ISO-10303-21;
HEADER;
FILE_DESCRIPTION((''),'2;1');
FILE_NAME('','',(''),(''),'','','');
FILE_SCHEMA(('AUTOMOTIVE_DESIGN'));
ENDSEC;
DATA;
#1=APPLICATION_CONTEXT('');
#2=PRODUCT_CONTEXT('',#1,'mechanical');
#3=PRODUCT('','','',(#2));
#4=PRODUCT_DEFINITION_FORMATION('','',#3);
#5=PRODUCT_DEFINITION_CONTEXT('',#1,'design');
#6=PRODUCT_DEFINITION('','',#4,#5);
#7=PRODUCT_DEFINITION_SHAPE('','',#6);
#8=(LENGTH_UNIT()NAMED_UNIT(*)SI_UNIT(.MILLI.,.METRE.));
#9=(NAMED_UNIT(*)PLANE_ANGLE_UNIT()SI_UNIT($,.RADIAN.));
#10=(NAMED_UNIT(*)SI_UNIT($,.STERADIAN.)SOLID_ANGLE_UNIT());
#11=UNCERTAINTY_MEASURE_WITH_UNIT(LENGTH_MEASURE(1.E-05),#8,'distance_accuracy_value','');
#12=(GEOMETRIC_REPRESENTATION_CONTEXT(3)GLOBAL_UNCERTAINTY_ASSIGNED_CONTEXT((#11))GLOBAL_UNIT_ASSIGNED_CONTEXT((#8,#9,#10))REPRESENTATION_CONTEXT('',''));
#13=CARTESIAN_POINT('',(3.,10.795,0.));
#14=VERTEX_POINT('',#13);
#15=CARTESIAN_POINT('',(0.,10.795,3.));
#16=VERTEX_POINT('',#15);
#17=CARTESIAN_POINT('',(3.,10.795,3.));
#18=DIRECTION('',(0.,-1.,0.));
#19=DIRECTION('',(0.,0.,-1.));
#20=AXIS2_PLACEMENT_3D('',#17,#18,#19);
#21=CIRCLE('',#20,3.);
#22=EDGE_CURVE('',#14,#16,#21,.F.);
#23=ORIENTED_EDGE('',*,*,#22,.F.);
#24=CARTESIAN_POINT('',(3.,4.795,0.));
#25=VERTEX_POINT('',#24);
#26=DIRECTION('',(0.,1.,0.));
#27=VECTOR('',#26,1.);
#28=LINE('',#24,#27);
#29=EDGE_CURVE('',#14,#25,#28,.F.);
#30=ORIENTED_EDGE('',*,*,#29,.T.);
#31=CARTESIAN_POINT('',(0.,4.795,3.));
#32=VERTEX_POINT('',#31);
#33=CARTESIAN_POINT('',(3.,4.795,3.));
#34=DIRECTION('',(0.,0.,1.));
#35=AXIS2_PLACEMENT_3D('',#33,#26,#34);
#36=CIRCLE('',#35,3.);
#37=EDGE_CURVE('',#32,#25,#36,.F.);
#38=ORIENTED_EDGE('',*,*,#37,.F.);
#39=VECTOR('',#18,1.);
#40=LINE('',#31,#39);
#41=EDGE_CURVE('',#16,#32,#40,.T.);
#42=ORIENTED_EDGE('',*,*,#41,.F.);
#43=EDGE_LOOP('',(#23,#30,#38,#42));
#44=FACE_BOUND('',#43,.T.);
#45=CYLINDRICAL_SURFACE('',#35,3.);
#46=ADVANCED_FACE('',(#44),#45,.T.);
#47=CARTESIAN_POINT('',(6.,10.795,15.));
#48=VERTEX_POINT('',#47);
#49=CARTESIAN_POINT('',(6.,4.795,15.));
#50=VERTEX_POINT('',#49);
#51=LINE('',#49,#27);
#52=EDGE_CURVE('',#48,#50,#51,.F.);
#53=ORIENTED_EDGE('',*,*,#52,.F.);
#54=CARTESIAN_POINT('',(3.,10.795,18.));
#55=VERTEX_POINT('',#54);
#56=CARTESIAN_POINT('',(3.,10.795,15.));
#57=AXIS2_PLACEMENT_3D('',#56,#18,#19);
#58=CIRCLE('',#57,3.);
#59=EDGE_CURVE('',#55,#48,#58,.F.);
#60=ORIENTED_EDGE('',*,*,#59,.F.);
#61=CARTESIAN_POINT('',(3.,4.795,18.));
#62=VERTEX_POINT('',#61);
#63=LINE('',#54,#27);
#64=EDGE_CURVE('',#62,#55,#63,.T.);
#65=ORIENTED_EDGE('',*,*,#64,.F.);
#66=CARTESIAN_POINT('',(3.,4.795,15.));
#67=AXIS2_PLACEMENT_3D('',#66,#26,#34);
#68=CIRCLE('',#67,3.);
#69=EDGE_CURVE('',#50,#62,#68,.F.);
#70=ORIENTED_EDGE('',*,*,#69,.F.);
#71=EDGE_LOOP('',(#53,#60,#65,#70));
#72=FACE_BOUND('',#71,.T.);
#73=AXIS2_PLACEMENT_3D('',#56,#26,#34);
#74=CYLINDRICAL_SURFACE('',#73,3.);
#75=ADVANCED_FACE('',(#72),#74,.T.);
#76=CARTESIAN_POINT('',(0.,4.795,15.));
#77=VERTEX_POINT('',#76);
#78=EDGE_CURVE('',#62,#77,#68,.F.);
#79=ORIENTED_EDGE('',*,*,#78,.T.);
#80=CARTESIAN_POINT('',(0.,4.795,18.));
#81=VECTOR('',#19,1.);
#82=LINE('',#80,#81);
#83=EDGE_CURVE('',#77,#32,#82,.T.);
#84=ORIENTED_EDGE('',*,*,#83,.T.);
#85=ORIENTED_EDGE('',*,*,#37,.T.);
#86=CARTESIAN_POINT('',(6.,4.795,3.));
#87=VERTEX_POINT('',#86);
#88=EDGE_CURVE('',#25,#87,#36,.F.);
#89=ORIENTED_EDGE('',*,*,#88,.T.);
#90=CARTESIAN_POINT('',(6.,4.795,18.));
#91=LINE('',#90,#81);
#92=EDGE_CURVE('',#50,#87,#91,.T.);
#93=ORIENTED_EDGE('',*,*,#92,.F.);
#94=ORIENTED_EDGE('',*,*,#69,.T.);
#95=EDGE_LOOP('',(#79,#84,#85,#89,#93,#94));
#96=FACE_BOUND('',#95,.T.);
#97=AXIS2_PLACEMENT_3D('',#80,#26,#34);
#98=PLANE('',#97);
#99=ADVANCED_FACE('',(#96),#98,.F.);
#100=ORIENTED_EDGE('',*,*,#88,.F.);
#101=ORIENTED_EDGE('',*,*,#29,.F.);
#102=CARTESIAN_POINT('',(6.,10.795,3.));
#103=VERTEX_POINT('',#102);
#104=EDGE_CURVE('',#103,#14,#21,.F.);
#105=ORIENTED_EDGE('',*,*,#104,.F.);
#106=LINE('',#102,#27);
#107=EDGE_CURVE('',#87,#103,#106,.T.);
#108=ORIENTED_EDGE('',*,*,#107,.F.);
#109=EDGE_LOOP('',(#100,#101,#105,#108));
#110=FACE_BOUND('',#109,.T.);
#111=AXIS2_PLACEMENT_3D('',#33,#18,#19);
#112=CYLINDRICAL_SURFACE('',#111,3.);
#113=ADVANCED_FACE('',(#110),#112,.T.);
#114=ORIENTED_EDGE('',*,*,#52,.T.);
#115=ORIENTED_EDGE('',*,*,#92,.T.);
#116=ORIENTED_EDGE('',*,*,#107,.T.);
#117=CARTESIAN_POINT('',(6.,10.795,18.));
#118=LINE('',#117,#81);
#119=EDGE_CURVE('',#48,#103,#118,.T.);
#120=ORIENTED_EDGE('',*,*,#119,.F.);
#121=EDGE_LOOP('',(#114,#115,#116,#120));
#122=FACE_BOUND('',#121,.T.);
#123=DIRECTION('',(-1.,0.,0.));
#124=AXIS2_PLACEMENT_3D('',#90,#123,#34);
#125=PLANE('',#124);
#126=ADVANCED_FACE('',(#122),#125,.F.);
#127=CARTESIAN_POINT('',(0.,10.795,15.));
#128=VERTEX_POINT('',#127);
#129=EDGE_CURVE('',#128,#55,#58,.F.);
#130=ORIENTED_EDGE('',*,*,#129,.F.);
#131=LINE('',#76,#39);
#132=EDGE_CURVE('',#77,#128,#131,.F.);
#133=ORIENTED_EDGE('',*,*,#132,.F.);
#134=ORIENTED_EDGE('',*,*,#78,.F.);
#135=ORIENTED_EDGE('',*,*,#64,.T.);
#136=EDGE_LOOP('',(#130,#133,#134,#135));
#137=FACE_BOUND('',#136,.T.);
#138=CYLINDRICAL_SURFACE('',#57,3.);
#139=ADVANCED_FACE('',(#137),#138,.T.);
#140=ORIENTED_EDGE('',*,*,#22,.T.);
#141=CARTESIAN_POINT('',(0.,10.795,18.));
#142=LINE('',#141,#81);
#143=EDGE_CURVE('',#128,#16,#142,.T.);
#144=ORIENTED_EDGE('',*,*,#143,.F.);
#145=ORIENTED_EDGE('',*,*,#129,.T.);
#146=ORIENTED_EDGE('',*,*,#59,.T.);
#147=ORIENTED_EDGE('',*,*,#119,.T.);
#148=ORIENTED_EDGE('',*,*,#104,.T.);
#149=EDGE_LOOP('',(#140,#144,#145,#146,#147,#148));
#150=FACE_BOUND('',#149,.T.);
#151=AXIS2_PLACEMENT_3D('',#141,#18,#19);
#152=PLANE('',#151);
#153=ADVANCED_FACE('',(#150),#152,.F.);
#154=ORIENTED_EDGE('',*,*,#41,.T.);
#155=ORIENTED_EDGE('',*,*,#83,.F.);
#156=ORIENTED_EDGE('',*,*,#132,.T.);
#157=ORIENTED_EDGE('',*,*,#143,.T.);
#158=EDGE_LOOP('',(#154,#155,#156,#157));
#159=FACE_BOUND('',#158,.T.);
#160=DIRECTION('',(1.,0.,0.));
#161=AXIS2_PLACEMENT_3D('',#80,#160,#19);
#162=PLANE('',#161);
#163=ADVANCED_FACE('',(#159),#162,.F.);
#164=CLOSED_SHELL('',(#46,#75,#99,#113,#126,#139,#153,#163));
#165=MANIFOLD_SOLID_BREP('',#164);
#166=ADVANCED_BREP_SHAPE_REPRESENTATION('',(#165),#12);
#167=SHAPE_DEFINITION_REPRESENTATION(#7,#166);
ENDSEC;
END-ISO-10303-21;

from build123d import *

# Parameters (mm, degrees)
SKETCH1_W      = 6
SKETCH1_H      = 6
EXTRUDE1_DEPTH = 18
FILLET1_R      = 3


with BuildPart() as part:
    # Sketch1 → Extrude1 (new body)
    with BuildSketch(Plane.XY):
        with Locations((3, 7.795)):
            Rectangle(SKETCH1_W, SKETCH1_H)
    extrude(amount=EXTRUDE1_DEPTH)

    # Fillet1
    fillet1_edges = [part.edges().sort_by_distance(p)[0] for p in [
        (0, 7.795, 0),
        (6, 7.795, 0),
        (0, 7.795, 18),
        (6, 7.795, 18),
    ]]
    fillet(fillet1_edges, radius=FILLET1_R - 0.0001)  # a hair under: the kernel refuses the full size


solid = part.part
